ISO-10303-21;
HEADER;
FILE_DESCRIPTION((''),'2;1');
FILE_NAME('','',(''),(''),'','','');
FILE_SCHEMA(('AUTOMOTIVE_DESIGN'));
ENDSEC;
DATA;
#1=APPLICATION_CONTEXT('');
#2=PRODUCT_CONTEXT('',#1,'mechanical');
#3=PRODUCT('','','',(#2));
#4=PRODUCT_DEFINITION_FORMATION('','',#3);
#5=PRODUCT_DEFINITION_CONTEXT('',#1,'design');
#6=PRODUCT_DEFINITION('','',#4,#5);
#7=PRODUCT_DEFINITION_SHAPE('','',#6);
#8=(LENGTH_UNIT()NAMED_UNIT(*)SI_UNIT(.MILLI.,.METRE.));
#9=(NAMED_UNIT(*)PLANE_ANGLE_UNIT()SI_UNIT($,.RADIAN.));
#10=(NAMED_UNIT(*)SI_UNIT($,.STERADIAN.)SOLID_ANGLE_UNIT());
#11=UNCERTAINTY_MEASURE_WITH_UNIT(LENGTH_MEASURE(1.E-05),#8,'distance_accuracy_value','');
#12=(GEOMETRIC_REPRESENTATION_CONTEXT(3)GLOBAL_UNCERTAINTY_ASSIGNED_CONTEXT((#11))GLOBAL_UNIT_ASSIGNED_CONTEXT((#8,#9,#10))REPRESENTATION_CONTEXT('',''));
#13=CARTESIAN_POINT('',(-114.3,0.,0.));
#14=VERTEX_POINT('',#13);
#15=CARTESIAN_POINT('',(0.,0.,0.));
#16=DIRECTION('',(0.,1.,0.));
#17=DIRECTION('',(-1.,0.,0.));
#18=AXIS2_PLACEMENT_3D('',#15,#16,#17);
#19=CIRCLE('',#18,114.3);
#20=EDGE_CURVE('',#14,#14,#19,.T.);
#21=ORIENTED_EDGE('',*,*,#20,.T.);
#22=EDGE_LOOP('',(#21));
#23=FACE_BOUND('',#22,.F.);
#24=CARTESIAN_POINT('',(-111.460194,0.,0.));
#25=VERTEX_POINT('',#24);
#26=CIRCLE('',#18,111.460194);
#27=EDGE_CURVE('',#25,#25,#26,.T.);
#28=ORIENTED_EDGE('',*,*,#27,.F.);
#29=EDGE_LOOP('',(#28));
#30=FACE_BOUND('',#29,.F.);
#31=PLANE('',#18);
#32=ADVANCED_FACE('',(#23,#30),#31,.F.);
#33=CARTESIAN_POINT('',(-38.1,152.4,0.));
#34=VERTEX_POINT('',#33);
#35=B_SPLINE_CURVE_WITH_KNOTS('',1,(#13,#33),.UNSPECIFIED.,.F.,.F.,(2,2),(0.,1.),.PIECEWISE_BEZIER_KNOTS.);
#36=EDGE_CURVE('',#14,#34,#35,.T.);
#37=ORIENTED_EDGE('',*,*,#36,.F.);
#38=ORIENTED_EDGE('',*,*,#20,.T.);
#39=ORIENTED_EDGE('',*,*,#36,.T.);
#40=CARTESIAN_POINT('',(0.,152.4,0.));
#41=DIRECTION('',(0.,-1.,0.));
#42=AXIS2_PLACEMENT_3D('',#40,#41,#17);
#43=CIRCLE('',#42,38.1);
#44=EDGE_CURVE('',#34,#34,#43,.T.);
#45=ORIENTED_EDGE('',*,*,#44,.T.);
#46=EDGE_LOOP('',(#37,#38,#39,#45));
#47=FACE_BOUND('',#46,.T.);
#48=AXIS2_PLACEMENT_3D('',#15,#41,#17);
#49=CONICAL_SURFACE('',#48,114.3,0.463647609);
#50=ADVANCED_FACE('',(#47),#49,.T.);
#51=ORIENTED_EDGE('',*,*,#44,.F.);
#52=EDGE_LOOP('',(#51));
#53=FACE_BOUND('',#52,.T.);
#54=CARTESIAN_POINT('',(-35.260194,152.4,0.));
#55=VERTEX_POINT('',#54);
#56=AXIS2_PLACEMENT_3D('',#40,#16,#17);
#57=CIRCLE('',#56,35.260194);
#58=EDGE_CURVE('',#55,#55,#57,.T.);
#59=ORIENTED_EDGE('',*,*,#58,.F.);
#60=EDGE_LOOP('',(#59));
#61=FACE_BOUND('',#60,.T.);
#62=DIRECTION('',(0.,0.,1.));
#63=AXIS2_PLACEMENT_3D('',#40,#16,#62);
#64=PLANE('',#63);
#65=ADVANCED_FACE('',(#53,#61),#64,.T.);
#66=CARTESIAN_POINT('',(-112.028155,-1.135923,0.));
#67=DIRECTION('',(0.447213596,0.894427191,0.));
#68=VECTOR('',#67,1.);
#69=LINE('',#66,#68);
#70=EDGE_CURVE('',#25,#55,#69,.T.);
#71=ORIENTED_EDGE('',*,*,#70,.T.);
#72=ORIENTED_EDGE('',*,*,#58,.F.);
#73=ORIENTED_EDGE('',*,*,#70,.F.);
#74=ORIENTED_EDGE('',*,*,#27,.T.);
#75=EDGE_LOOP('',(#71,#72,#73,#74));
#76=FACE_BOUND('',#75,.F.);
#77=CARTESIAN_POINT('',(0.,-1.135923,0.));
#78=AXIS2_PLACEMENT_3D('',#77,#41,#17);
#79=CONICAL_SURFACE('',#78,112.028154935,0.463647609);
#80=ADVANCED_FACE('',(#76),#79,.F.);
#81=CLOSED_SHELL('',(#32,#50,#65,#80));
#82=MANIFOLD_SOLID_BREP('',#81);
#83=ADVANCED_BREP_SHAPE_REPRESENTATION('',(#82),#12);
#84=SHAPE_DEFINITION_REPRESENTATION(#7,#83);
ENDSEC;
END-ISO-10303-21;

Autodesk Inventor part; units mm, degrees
ref_plane "YZ Plane" through (0, 0, 0) normal (1, 0, 0) x (0, 1, 0)
ref_plane "XZ Plane" through (0, 0, 0) normal (0, 1, 0) x (-1, 0, 0)
ref_plane "XY Plane" through (0, 0, 0) normal (0, 0, 1) x (1, 0, 0)
sketch "Sketch1" plane through (0, 0, 0) normal (0, 1, 0) x (-1, 0, 0)
  circle A0 centre (0, 0) radius 114.3
  line L0 (0, 0) -> (-114.3, 0)
  dimension "d20" = 228.6
sketch3d "3D Sketch3"
ref_plane "Work Plane6" through (0, 152.4, 0) normal (0, 1, 0) x (0, 0, 1)
sketch "Sketch8" plane through (0, 152.4, 0) normal (0, 1, 0) x (0, 0, 1)
  circle A0 centre (0, 0) radius 38.1
  point P0 (0, 0)
  dimension "d14" = 76.2
loft "Loft1" add profiles "Sketch1", "Sketch8"
shell "Shell1" thickness 2.54 removed faces 2 at (4.3637, 152.4, 0.9393) at (-34.4881, 0, 8.72)
properties part number "Funnel"
